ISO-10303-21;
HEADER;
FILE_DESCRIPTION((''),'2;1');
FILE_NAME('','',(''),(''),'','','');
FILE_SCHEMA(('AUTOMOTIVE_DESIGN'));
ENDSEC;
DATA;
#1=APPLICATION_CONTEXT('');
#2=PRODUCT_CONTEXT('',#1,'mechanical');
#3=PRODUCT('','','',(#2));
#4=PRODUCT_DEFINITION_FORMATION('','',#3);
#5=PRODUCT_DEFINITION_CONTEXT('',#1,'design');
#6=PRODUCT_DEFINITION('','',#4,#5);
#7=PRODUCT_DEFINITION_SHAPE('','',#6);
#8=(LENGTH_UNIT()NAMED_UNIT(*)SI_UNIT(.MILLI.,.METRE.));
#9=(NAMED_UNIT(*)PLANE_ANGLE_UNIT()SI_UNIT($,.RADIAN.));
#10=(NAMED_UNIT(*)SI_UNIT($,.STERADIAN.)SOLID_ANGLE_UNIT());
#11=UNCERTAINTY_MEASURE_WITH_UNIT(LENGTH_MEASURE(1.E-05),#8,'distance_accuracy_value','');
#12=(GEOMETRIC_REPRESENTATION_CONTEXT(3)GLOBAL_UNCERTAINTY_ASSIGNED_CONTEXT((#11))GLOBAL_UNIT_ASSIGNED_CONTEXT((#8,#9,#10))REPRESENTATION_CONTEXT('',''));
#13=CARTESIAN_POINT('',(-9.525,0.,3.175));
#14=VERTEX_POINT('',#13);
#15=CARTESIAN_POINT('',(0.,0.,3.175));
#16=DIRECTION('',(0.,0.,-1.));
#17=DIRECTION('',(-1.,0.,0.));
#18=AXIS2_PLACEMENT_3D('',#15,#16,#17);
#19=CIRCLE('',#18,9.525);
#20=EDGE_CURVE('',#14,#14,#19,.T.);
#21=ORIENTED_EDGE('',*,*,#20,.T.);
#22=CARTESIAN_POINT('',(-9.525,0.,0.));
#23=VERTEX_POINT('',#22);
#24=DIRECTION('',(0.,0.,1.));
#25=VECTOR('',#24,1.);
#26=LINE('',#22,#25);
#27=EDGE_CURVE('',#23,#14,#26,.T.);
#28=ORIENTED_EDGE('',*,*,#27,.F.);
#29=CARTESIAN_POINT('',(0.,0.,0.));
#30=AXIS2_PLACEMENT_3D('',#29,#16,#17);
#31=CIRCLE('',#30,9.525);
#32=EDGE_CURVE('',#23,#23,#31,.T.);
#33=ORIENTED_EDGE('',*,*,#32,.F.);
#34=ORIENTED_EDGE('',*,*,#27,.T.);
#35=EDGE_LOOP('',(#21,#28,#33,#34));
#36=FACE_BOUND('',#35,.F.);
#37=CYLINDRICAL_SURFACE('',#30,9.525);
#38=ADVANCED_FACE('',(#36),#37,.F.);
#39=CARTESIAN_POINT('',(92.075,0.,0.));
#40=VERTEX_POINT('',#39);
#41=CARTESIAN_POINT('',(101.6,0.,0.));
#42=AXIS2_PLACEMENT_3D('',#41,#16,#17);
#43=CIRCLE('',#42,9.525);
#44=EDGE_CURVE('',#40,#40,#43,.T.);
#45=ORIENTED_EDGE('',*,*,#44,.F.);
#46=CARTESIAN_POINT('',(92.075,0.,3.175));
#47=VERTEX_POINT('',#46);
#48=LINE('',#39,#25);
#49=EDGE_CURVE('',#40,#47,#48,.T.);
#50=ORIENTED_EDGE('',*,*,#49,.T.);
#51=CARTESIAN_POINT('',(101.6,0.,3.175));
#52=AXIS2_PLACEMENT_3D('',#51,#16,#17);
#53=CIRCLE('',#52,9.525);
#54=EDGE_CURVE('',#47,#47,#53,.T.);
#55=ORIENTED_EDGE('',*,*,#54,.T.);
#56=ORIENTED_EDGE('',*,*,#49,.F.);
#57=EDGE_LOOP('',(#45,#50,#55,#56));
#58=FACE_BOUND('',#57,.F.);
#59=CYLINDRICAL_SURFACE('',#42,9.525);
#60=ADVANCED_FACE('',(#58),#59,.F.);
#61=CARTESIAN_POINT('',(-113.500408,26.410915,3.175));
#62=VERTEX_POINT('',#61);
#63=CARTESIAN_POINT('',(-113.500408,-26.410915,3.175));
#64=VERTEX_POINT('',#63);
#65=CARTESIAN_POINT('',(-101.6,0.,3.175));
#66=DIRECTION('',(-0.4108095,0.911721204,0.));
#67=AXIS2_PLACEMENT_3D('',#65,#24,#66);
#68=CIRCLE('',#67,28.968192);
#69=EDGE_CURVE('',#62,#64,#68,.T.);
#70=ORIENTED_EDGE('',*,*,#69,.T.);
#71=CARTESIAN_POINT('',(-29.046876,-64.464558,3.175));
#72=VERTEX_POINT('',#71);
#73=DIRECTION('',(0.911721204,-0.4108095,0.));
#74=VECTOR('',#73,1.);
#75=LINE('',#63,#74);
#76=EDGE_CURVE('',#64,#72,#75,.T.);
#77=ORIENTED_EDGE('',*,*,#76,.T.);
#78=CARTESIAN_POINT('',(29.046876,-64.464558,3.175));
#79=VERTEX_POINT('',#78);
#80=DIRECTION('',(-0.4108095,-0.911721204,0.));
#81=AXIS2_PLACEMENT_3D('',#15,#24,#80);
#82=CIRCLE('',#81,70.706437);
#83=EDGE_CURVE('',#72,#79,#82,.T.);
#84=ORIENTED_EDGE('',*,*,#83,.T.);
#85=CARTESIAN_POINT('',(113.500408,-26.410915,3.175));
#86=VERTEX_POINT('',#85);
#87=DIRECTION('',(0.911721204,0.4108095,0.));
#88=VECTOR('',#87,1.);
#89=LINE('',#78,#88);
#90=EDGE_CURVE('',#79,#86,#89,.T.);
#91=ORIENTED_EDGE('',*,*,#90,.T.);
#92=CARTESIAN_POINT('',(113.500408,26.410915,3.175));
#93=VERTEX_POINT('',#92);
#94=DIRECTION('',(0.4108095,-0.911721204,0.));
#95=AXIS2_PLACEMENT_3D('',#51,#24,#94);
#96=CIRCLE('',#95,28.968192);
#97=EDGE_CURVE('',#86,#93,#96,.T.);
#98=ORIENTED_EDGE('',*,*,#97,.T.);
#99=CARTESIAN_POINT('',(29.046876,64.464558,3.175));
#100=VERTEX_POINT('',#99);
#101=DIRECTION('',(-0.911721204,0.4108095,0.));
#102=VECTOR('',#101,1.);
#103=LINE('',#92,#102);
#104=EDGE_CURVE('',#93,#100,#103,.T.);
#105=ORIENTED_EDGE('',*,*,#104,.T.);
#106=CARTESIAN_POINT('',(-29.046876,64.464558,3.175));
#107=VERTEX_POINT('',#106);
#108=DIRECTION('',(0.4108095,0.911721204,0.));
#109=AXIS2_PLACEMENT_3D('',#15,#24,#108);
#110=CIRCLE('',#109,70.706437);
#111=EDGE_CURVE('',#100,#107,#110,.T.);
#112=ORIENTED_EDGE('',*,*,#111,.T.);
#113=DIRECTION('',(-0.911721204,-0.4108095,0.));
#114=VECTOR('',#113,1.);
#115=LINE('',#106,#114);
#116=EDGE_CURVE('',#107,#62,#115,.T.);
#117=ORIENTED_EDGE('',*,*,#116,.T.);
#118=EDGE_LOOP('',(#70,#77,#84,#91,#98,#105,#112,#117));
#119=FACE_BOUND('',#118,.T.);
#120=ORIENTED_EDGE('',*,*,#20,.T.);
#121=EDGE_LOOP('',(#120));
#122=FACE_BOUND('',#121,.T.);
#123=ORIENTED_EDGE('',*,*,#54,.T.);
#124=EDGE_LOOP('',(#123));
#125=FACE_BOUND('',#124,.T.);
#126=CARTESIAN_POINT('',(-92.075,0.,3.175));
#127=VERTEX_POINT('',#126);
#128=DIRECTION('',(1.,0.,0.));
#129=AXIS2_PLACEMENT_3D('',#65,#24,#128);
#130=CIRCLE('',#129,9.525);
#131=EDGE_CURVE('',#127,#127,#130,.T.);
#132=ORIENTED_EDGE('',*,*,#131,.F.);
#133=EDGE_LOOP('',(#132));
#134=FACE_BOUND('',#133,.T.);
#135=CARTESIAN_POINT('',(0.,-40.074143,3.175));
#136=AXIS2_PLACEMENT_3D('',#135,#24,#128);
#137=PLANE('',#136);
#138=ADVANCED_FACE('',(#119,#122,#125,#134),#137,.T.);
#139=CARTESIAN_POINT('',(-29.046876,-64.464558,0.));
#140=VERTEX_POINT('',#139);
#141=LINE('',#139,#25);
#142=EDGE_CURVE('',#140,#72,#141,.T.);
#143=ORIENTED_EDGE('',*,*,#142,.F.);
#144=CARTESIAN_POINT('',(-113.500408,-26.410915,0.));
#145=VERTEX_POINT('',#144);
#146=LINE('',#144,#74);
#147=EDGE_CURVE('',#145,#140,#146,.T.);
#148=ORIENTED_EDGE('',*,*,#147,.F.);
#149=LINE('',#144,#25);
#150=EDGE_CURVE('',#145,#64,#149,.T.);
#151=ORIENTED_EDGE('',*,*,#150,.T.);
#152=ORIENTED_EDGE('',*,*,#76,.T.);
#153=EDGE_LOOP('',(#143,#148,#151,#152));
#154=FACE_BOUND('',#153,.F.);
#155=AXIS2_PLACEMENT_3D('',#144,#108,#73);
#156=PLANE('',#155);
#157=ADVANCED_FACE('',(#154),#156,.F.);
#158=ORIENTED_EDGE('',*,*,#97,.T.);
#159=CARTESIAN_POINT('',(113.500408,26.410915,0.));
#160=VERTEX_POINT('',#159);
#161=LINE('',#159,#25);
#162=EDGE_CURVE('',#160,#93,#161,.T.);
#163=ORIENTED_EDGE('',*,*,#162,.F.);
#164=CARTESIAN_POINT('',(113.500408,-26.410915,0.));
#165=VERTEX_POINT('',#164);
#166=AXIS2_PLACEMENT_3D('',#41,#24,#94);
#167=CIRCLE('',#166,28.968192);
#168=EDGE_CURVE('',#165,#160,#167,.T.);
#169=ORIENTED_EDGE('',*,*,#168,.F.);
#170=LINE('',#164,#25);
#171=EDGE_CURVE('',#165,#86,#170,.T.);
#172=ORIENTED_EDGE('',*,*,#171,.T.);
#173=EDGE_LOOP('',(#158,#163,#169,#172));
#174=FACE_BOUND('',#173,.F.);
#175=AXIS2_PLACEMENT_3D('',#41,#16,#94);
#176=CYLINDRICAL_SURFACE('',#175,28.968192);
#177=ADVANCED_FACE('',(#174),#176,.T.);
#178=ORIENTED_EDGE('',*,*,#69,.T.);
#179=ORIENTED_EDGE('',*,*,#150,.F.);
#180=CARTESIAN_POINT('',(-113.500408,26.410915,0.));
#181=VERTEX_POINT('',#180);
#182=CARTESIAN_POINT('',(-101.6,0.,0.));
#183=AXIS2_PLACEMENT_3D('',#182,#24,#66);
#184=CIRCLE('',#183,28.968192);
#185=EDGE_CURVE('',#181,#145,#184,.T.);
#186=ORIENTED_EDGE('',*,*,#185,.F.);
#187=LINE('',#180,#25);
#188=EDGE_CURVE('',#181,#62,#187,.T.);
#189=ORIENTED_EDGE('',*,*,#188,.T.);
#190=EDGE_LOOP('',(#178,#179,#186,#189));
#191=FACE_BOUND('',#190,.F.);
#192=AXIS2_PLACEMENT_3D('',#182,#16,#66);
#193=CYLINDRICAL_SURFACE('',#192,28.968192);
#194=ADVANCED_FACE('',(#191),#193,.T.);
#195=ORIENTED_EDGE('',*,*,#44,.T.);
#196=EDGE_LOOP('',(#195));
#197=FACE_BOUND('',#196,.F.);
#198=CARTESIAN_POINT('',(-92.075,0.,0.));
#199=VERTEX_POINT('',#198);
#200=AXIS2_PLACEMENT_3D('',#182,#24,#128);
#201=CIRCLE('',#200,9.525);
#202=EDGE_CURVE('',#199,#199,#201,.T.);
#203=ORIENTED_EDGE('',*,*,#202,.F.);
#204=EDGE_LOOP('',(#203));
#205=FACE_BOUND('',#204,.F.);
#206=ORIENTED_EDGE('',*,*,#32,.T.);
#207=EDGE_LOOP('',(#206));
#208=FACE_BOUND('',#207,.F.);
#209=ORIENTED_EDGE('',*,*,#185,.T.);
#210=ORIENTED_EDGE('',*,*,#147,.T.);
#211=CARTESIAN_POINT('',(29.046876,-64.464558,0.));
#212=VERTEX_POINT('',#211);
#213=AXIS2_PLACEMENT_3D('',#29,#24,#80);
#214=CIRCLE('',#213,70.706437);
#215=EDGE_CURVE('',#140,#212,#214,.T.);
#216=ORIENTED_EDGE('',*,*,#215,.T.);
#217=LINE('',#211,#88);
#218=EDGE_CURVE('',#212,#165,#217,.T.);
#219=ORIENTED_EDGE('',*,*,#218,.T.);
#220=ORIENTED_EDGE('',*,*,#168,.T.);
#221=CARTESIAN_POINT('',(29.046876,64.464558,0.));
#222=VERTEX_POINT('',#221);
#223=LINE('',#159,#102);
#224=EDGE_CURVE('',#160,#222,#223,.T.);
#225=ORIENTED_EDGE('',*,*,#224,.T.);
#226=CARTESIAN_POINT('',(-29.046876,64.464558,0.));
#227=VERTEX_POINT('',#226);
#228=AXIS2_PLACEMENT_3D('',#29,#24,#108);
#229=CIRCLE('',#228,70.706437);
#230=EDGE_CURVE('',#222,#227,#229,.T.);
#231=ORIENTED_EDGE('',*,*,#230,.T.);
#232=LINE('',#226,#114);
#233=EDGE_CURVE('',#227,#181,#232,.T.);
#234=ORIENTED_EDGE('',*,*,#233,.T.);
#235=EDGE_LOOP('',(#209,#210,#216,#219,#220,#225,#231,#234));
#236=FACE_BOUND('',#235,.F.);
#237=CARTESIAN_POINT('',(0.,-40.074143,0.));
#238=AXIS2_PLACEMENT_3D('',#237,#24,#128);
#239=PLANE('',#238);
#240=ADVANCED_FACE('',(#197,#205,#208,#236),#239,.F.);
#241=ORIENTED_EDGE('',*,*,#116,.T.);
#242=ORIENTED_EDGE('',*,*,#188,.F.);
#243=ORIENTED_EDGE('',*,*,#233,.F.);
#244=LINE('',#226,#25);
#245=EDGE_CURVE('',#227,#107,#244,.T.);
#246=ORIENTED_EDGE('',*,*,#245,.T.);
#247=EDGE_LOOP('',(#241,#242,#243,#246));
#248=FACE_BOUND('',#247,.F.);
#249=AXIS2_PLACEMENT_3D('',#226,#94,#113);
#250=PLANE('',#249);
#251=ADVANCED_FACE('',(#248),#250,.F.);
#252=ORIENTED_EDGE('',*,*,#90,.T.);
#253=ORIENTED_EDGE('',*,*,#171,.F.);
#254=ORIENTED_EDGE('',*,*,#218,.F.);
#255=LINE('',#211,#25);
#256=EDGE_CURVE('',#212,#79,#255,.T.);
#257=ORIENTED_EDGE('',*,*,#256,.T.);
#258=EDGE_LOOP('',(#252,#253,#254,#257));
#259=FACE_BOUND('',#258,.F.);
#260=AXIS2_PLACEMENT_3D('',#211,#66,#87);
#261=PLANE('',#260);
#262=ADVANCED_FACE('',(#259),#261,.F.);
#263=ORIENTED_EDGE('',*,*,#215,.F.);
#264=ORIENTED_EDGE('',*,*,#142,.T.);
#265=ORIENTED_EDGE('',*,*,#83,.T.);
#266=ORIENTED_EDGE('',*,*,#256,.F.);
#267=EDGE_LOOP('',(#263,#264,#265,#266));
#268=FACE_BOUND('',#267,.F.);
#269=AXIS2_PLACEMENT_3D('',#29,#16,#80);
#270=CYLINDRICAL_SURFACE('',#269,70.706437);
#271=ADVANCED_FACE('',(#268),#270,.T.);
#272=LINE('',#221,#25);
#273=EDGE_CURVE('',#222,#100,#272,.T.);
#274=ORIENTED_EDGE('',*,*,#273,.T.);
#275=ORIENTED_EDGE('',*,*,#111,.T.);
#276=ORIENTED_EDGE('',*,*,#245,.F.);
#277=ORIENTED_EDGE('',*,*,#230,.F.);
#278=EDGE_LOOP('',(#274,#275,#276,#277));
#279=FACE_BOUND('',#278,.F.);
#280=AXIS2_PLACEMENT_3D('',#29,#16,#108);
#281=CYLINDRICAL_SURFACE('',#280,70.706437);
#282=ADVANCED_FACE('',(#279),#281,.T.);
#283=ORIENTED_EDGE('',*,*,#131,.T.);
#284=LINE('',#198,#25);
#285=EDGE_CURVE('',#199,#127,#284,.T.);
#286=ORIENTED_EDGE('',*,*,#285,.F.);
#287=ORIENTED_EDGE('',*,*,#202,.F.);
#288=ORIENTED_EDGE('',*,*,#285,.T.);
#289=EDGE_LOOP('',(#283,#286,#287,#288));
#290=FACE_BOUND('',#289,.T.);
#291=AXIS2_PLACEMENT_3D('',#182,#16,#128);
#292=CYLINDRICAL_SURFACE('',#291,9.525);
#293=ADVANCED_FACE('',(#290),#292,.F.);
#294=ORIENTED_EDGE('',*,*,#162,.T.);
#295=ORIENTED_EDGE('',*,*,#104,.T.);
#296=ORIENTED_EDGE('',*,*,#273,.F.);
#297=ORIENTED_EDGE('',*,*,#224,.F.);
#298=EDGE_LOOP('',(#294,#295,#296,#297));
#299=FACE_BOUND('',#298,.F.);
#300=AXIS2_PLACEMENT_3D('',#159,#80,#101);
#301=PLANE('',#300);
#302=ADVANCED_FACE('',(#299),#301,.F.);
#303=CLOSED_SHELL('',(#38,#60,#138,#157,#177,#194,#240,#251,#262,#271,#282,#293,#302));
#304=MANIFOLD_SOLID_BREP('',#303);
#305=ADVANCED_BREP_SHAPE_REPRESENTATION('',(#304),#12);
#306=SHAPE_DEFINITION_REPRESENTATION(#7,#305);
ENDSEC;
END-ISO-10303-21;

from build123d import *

# Parameters (mm, degrees)
F0_R     = 13.9065
F0_R_2   = 9.525
F1_DEPTH = 3.175


# Not quite as in the source:
# - a length typed as a fraction of an inch, garbled in the dataset ("3 / 203.2 mm" for 3/8 in), is restored


with BuildPart() as f1:
    # F0 (on Top) → F1 (new body)
    with BuildSketch(Plane.XY):
        with BuildLine():
            Line((70.7064372, 0), (64.77, 0))
            ThreePointArc((64.77, 0), (0, -64.77), (-64.77, 0))
            Line((-64.77, 0), (-70.7064372, 0))
            ThreePointArc((-70.7064372, 0), (-59.3851891605, -38.3770708873), (-29.0468761129, -64.4645580889))
            ThreePointArc((-29.0468761129, -64.4645580889), (0, -70.7064372), (29.0468761129, -64.4645580889))
            ThreePointArc((29.0468761129, -64.4645580889), (59.3851891605, -38.3770708873), (70.7064372, 0))
        make_face()
        with BuildLine():
            ThreePointArc((-64.77, 0), (0, 64.77), (64.77, 0))
            Line((64.77, 0), (70.7064372, 0))
            ThreePointArc((70.7064372, 0), (59.3851891605, 38.3770708873), (29.0468761129, 64.4645580889))
            ThreePointArc((29.0468761129, 64.4645580889), (0, 70.7064372), (-29.0468761129, 64.4645580889))
            ThreePointArc((-29.0468761129, 64.4645580889), (-59.3851891605, 38.3770708873), (-70.7064372, 0))
            Line((-70.7064372, 0), (-64.77, 0))
        make_face()
        with BuildLine():
            Line((72.631808, 0), (70.7064372, 0))
            ThreePointArc((70.7064372, 0), (59.3851891605, -38.3770708873), (29.0468761129, -64.4645580889))
            Line((29.0468761129, -64.4645580889), (113.5004084714, -26.410914902))
            ThreePointArc((113.5004084714, -26.410914902), (85.8770417817, -24.3299143569), (72.631808, 0))
        make_face()
        with BuildLine():
            ThreePointArc((29.0468761129, 64.4645580889), (59.3851891605, 38.3770708873), (70.7064372, 0))
            Line((70.7064372, 0), (72.631808, 0))
            ThreePointArc((72.631808, 0), (85.8770417817, 24.3299143569), (113.5004084714, 26.410914902))
            Line((113.5004084714, 26.410914902), (29.0468761129, 64.4645580889))
        make_face()
        with BuildLine():
            Line((-72.631808, 0), (-70.7064372, 0))
            ThreePointArc((-70.7064372, 0), (-59.3851891605, 38.3770708873), (-29.0468761129, 64.4645580889))
            Line((-29.0468761129, 64.4645580889), (-113.5004084714, 26.410914902))
            ThreePointArc((-113.5004084714, 26.410914902), (-85.8770417817, 24.3299143569), (-72.631808, 0))
        make_face()
        with BuildLine():
            ThreePointArc((-29.0468761129, -64.4645580889), (-59.3851891605, -38.3770708873), (-70.7064372, 0))
            Line((-70.7064372, 0), (-72.631808, 0))
            ThreePointArc((-72.631808, 0), (-85.8770417817, -24.3299143569), (-113.5004084714, -26.410914902))
            Line((-113.5004084714, -26.410914902), (-29.0468761129, -64.4645580889))
        make_face()
        with BuildLine():
            ThreePointArc((113.5004084714, 26.410914902), (85.8770417817, 24.3299143569), (72.631808, 0))
            ThreePointArc((72.631808, 0), (85.8770417817, -24.3299143569), (113.5004084714, -26.410914902))
            ThreePointArc((113.5004084714, -26.410914902), (125.9299143569, -15.7229582183), (130.568192, 0))
            ThreePointArc((130.568192, 0), (125.9299143569, 15.7229582183), (113.5004084714, 26.410914902))
        make_face()
        with BuildLine():
            ThreePointArc((115.5065, 0), (101.6, -13.9065), (87.6935, 0))
            ThreePointArc((87.6935, 0), (101.6, 13.9065), (115.5065, 0))
        make_face(mode=Mode.SUBTRACT)
        with BuildLine():
            ThreePointArc((-113.5004084714, -26.410914902), (-85.8770417817, -24.3299143569), (-72.631808, 0))
            ThreePointArc((-72.631808, 0), (-85.8770417817, 24.3299143569), (-113.5004084714, 26.410914902))
            ThreePointArc((-113.5004084714, 26.410914902), (-130.568192, 0), (-113.5004084714, -26.410914902))
        make_face()
        with Locations((-101.6, 0)):
            Circle(F0_R, mode=Mode.SUBTRACT)
        with BuildLine():
            ThreePointArc((-64.77, 0), (0, -64.77), (64.77, 0))
            Line((64.77, 0), (9.525, 0))
            ThreePointArc((9.525, 0), (0, -9.525), (-9.525, 0))
            Line((-9.525, 0), (-64.77, 0))
        make_face()
        with BuildLine():
            Line((9.525, 0), (64.77, 0))
            ThreePointArc((64.77, 0), (0, 64.77), (-64.77, 0))
            Line((-64.77, 0), (-9.525, 0))
            ThreePointArc((-9.525, 0), (0, 9.525), (9.525, 0))
        make_face()
        with BuildLine():
            ThreePointArc((115.5065, 0), (101.6, 13.9065), (87.6935, 0))
            ThreePointArc((87.6935, 0), (101.6, -13.9065), (115.5065, 0))
        make_face()
        with BuildLine():
            ThreePointArc((111.125, 0), (101.6, -9.525), (92.075, 0))
            ThreePointArc((92.075, 0), (101.6, 9.525), (111.125, 0))
        make_face(mode=Mode.SUBTRACT)
        with Locations((-101.6, 0)):
            Circle(F0_R)
        with Locations((-101.6, 0)):
            Circle(F0_R_2, mode=Mode.SUBTRACT)
    extrude(amount=F1_DEPTH)


solid = f1.part
